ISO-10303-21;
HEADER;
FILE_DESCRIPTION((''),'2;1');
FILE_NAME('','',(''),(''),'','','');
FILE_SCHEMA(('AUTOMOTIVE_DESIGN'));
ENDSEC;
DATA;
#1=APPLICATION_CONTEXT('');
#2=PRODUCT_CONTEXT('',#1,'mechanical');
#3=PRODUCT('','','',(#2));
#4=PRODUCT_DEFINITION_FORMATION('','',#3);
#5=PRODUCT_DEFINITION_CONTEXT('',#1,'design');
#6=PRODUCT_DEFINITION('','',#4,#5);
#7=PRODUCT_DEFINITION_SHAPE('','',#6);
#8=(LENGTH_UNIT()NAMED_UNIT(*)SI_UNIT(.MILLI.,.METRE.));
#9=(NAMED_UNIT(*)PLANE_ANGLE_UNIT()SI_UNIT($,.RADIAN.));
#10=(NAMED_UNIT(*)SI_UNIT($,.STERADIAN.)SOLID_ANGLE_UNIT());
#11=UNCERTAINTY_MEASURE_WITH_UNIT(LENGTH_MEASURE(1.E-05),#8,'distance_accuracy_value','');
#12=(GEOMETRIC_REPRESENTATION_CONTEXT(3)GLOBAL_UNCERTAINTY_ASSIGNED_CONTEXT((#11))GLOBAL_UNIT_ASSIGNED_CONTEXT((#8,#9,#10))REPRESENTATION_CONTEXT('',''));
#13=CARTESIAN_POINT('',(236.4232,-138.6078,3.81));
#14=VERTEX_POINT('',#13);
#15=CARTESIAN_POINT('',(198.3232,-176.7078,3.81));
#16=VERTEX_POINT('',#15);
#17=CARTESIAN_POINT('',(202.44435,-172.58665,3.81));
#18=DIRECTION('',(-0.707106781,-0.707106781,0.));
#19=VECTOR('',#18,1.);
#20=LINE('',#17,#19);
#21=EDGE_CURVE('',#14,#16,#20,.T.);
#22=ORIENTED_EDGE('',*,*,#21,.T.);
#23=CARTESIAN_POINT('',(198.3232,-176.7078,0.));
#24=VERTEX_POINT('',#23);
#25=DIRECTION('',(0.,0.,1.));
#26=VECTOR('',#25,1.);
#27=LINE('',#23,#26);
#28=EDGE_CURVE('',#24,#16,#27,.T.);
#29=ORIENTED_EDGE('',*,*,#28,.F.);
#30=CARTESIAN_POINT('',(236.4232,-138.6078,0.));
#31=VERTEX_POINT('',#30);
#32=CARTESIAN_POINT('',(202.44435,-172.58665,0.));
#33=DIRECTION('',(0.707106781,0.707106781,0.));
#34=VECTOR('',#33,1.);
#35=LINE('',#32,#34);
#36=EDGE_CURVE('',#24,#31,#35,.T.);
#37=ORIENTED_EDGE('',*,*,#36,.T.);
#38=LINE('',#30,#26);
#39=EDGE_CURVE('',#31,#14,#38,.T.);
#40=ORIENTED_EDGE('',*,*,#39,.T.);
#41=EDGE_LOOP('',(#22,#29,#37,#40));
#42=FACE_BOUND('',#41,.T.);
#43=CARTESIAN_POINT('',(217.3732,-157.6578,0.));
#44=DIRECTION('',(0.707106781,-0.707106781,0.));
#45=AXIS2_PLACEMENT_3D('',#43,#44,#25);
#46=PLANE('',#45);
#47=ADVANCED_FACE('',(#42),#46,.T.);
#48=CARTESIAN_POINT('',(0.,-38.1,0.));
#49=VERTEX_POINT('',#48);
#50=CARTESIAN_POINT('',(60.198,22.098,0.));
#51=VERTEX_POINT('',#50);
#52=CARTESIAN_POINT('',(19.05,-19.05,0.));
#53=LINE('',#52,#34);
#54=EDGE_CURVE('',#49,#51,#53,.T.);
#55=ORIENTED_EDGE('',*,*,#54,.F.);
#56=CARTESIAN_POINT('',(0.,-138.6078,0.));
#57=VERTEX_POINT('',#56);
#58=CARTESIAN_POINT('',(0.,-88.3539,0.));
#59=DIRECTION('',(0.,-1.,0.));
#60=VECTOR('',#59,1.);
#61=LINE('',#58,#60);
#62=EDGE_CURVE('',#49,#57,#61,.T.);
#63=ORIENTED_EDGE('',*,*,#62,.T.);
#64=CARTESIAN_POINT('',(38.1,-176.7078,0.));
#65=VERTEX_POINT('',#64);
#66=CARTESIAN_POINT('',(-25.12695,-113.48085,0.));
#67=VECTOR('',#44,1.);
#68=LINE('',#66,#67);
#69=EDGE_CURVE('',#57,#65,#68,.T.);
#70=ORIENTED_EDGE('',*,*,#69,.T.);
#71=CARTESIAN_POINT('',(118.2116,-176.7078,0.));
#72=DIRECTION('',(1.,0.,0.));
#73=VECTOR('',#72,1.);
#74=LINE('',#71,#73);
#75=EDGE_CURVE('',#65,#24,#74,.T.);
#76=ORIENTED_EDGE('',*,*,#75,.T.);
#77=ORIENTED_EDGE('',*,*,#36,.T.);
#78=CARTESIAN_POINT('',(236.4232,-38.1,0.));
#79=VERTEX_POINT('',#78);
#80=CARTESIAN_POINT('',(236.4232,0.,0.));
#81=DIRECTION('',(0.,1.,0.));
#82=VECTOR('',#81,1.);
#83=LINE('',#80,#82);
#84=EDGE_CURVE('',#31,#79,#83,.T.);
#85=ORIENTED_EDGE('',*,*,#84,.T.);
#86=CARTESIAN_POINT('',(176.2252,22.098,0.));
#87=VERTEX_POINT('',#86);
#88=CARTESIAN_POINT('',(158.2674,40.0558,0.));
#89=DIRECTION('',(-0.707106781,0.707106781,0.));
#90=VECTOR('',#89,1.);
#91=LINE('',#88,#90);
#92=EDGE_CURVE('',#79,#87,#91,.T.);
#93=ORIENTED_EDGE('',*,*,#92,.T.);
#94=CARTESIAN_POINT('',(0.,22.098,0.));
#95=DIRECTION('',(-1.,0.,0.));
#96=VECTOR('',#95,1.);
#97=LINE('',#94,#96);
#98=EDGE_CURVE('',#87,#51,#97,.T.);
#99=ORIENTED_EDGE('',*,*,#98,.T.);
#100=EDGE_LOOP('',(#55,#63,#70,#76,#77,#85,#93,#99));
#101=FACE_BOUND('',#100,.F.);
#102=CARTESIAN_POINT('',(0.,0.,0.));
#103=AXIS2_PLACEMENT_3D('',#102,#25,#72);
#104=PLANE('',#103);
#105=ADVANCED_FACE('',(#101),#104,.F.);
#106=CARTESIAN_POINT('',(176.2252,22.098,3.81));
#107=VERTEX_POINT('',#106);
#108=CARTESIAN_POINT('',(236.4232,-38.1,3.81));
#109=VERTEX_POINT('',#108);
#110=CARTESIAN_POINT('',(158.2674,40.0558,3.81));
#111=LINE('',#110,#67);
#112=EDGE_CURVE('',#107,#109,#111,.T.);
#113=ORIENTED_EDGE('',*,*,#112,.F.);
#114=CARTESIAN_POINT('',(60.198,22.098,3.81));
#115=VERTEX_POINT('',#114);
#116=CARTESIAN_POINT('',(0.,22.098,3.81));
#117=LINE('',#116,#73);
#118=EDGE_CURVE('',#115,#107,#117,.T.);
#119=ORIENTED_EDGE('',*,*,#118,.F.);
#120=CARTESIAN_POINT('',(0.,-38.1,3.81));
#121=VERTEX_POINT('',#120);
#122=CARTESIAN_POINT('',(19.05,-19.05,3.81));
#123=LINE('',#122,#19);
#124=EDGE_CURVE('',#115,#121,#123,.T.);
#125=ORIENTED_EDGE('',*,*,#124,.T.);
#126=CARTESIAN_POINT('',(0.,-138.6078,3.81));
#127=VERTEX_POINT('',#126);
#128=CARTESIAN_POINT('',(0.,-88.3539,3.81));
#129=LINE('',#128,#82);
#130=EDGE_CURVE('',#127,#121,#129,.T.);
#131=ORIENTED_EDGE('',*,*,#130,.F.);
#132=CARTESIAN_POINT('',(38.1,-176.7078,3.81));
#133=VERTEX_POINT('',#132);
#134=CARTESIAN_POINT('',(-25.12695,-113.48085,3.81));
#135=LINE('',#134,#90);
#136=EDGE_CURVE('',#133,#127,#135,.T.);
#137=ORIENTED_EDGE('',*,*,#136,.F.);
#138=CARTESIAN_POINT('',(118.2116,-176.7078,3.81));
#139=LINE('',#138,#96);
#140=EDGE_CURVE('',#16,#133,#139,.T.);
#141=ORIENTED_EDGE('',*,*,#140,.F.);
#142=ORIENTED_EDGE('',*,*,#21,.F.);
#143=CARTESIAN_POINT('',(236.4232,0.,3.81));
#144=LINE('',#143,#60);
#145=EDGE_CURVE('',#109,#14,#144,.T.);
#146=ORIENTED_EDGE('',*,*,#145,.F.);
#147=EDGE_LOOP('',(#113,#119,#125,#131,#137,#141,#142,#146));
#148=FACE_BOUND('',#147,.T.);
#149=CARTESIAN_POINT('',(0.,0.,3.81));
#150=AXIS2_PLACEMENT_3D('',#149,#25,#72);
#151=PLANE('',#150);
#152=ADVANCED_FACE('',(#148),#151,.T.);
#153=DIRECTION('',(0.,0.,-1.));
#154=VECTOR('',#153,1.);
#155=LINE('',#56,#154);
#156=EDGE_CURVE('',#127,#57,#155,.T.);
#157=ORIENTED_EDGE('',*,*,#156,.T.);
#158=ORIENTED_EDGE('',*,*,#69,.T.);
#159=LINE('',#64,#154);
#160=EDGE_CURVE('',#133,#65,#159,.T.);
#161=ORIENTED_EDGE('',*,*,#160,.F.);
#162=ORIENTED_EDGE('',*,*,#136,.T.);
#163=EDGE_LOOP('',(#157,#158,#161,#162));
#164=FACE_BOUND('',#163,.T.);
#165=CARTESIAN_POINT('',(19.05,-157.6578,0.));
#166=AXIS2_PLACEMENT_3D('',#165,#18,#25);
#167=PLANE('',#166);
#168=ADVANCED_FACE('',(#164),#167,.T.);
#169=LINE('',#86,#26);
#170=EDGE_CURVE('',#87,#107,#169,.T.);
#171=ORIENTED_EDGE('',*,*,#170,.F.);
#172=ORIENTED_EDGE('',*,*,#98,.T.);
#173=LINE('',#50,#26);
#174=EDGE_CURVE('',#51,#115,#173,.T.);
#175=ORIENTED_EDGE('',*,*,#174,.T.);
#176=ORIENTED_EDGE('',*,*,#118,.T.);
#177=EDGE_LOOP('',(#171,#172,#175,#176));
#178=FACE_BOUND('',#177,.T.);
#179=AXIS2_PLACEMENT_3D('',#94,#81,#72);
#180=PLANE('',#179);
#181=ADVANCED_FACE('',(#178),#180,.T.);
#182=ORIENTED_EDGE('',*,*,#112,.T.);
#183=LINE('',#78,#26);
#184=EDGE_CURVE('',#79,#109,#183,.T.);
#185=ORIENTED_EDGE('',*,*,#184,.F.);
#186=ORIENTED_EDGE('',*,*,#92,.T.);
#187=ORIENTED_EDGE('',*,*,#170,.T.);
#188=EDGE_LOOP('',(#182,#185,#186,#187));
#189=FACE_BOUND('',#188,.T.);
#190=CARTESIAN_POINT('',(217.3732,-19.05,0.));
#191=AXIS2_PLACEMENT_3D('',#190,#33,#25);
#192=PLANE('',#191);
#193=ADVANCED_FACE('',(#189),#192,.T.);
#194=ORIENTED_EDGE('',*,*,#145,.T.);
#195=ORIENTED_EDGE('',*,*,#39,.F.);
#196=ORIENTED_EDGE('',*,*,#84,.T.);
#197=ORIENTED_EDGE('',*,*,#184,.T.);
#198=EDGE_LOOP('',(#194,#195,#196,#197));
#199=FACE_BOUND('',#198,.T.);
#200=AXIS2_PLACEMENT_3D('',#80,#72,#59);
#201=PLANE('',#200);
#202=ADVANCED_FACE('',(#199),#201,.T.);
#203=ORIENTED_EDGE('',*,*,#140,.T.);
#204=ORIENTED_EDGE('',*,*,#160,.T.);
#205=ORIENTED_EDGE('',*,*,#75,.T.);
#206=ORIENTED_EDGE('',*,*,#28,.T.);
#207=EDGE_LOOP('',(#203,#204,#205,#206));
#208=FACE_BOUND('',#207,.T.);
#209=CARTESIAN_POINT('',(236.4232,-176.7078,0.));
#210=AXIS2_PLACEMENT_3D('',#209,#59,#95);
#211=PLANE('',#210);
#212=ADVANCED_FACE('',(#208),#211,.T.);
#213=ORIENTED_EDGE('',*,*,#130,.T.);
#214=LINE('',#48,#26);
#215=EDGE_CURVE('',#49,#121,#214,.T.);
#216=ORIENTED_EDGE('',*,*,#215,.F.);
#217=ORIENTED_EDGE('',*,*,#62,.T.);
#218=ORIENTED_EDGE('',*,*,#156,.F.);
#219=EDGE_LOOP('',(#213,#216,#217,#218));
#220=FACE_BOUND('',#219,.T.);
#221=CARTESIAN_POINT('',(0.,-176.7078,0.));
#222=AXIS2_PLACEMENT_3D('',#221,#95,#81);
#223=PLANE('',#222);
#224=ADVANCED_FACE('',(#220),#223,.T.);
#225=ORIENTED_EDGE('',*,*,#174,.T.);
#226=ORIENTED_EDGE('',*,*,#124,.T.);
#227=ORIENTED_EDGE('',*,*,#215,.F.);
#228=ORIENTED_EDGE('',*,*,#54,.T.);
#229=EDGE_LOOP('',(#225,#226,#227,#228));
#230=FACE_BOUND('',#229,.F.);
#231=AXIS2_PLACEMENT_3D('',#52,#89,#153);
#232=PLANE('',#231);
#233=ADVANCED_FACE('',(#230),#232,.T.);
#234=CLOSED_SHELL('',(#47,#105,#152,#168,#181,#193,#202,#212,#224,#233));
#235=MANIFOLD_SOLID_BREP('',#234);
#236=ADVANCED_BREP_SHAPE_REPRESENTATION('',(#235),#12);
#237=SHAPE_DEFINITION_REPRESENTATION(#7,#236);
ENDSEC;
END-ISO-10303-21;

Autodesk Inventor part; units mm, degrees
ref_plane "YZ Plane" through (0, 0, 0) normal (1, 0, 0) x (0, 1, 0)
ref_plane "XZ Plane" through (0, 0, 0) normal (0, 1, 0) x (-1, 0, 0)
ref_plane "XY Plane" through (0, 0, 0) normal (0, 0, 1) x (1, 0, 0)
sketch "Sketch1" plane through (0, 0, 0) normal (0, 0, 1) x (1, 0, 0)
  line L0 (0, 0) -> (236.4232, 0)
  line L1 (236.4232, 0) -> (236.4232, -176.7078)
  line L2 (236.4232, -176.7078) -> (0, -176.7078)
  line L3 (0, -176.7078) -> (0, 0)
  dimension "d0" = 236.4232
  dimension "d1" = 176.7078
extrude "Extrusion1" add sketch "Sketch1" along normal blind 3.81
chamfer "Chamfer1" distance 38.1 angle 45 1 edges at (236.4232, 0, 1.905)
chamfer "Chamfer2" distance 38.1 angle 45 1 edges at (0, 0, 1.905)
chamfer "Chamfer3" distance 38.1 angle 45 1 edges at (236.4232, -176.7078, 1.905)
chamfer "Chamfer4" distance 38.1 angle 45 1 edges at (0, -176.7078, 1.905)
move faces "Move1" translate (0, 22.098, 0) faces at (91.5077, 0, 1.27)
sketch "Sketch2" plane through (198.3232, -176.7078, 0) normal (0, -1, 0) x (1, 0, 0)
  point P0 (-198.3232, 0)
properties part number "ElectronicsPlate2"
